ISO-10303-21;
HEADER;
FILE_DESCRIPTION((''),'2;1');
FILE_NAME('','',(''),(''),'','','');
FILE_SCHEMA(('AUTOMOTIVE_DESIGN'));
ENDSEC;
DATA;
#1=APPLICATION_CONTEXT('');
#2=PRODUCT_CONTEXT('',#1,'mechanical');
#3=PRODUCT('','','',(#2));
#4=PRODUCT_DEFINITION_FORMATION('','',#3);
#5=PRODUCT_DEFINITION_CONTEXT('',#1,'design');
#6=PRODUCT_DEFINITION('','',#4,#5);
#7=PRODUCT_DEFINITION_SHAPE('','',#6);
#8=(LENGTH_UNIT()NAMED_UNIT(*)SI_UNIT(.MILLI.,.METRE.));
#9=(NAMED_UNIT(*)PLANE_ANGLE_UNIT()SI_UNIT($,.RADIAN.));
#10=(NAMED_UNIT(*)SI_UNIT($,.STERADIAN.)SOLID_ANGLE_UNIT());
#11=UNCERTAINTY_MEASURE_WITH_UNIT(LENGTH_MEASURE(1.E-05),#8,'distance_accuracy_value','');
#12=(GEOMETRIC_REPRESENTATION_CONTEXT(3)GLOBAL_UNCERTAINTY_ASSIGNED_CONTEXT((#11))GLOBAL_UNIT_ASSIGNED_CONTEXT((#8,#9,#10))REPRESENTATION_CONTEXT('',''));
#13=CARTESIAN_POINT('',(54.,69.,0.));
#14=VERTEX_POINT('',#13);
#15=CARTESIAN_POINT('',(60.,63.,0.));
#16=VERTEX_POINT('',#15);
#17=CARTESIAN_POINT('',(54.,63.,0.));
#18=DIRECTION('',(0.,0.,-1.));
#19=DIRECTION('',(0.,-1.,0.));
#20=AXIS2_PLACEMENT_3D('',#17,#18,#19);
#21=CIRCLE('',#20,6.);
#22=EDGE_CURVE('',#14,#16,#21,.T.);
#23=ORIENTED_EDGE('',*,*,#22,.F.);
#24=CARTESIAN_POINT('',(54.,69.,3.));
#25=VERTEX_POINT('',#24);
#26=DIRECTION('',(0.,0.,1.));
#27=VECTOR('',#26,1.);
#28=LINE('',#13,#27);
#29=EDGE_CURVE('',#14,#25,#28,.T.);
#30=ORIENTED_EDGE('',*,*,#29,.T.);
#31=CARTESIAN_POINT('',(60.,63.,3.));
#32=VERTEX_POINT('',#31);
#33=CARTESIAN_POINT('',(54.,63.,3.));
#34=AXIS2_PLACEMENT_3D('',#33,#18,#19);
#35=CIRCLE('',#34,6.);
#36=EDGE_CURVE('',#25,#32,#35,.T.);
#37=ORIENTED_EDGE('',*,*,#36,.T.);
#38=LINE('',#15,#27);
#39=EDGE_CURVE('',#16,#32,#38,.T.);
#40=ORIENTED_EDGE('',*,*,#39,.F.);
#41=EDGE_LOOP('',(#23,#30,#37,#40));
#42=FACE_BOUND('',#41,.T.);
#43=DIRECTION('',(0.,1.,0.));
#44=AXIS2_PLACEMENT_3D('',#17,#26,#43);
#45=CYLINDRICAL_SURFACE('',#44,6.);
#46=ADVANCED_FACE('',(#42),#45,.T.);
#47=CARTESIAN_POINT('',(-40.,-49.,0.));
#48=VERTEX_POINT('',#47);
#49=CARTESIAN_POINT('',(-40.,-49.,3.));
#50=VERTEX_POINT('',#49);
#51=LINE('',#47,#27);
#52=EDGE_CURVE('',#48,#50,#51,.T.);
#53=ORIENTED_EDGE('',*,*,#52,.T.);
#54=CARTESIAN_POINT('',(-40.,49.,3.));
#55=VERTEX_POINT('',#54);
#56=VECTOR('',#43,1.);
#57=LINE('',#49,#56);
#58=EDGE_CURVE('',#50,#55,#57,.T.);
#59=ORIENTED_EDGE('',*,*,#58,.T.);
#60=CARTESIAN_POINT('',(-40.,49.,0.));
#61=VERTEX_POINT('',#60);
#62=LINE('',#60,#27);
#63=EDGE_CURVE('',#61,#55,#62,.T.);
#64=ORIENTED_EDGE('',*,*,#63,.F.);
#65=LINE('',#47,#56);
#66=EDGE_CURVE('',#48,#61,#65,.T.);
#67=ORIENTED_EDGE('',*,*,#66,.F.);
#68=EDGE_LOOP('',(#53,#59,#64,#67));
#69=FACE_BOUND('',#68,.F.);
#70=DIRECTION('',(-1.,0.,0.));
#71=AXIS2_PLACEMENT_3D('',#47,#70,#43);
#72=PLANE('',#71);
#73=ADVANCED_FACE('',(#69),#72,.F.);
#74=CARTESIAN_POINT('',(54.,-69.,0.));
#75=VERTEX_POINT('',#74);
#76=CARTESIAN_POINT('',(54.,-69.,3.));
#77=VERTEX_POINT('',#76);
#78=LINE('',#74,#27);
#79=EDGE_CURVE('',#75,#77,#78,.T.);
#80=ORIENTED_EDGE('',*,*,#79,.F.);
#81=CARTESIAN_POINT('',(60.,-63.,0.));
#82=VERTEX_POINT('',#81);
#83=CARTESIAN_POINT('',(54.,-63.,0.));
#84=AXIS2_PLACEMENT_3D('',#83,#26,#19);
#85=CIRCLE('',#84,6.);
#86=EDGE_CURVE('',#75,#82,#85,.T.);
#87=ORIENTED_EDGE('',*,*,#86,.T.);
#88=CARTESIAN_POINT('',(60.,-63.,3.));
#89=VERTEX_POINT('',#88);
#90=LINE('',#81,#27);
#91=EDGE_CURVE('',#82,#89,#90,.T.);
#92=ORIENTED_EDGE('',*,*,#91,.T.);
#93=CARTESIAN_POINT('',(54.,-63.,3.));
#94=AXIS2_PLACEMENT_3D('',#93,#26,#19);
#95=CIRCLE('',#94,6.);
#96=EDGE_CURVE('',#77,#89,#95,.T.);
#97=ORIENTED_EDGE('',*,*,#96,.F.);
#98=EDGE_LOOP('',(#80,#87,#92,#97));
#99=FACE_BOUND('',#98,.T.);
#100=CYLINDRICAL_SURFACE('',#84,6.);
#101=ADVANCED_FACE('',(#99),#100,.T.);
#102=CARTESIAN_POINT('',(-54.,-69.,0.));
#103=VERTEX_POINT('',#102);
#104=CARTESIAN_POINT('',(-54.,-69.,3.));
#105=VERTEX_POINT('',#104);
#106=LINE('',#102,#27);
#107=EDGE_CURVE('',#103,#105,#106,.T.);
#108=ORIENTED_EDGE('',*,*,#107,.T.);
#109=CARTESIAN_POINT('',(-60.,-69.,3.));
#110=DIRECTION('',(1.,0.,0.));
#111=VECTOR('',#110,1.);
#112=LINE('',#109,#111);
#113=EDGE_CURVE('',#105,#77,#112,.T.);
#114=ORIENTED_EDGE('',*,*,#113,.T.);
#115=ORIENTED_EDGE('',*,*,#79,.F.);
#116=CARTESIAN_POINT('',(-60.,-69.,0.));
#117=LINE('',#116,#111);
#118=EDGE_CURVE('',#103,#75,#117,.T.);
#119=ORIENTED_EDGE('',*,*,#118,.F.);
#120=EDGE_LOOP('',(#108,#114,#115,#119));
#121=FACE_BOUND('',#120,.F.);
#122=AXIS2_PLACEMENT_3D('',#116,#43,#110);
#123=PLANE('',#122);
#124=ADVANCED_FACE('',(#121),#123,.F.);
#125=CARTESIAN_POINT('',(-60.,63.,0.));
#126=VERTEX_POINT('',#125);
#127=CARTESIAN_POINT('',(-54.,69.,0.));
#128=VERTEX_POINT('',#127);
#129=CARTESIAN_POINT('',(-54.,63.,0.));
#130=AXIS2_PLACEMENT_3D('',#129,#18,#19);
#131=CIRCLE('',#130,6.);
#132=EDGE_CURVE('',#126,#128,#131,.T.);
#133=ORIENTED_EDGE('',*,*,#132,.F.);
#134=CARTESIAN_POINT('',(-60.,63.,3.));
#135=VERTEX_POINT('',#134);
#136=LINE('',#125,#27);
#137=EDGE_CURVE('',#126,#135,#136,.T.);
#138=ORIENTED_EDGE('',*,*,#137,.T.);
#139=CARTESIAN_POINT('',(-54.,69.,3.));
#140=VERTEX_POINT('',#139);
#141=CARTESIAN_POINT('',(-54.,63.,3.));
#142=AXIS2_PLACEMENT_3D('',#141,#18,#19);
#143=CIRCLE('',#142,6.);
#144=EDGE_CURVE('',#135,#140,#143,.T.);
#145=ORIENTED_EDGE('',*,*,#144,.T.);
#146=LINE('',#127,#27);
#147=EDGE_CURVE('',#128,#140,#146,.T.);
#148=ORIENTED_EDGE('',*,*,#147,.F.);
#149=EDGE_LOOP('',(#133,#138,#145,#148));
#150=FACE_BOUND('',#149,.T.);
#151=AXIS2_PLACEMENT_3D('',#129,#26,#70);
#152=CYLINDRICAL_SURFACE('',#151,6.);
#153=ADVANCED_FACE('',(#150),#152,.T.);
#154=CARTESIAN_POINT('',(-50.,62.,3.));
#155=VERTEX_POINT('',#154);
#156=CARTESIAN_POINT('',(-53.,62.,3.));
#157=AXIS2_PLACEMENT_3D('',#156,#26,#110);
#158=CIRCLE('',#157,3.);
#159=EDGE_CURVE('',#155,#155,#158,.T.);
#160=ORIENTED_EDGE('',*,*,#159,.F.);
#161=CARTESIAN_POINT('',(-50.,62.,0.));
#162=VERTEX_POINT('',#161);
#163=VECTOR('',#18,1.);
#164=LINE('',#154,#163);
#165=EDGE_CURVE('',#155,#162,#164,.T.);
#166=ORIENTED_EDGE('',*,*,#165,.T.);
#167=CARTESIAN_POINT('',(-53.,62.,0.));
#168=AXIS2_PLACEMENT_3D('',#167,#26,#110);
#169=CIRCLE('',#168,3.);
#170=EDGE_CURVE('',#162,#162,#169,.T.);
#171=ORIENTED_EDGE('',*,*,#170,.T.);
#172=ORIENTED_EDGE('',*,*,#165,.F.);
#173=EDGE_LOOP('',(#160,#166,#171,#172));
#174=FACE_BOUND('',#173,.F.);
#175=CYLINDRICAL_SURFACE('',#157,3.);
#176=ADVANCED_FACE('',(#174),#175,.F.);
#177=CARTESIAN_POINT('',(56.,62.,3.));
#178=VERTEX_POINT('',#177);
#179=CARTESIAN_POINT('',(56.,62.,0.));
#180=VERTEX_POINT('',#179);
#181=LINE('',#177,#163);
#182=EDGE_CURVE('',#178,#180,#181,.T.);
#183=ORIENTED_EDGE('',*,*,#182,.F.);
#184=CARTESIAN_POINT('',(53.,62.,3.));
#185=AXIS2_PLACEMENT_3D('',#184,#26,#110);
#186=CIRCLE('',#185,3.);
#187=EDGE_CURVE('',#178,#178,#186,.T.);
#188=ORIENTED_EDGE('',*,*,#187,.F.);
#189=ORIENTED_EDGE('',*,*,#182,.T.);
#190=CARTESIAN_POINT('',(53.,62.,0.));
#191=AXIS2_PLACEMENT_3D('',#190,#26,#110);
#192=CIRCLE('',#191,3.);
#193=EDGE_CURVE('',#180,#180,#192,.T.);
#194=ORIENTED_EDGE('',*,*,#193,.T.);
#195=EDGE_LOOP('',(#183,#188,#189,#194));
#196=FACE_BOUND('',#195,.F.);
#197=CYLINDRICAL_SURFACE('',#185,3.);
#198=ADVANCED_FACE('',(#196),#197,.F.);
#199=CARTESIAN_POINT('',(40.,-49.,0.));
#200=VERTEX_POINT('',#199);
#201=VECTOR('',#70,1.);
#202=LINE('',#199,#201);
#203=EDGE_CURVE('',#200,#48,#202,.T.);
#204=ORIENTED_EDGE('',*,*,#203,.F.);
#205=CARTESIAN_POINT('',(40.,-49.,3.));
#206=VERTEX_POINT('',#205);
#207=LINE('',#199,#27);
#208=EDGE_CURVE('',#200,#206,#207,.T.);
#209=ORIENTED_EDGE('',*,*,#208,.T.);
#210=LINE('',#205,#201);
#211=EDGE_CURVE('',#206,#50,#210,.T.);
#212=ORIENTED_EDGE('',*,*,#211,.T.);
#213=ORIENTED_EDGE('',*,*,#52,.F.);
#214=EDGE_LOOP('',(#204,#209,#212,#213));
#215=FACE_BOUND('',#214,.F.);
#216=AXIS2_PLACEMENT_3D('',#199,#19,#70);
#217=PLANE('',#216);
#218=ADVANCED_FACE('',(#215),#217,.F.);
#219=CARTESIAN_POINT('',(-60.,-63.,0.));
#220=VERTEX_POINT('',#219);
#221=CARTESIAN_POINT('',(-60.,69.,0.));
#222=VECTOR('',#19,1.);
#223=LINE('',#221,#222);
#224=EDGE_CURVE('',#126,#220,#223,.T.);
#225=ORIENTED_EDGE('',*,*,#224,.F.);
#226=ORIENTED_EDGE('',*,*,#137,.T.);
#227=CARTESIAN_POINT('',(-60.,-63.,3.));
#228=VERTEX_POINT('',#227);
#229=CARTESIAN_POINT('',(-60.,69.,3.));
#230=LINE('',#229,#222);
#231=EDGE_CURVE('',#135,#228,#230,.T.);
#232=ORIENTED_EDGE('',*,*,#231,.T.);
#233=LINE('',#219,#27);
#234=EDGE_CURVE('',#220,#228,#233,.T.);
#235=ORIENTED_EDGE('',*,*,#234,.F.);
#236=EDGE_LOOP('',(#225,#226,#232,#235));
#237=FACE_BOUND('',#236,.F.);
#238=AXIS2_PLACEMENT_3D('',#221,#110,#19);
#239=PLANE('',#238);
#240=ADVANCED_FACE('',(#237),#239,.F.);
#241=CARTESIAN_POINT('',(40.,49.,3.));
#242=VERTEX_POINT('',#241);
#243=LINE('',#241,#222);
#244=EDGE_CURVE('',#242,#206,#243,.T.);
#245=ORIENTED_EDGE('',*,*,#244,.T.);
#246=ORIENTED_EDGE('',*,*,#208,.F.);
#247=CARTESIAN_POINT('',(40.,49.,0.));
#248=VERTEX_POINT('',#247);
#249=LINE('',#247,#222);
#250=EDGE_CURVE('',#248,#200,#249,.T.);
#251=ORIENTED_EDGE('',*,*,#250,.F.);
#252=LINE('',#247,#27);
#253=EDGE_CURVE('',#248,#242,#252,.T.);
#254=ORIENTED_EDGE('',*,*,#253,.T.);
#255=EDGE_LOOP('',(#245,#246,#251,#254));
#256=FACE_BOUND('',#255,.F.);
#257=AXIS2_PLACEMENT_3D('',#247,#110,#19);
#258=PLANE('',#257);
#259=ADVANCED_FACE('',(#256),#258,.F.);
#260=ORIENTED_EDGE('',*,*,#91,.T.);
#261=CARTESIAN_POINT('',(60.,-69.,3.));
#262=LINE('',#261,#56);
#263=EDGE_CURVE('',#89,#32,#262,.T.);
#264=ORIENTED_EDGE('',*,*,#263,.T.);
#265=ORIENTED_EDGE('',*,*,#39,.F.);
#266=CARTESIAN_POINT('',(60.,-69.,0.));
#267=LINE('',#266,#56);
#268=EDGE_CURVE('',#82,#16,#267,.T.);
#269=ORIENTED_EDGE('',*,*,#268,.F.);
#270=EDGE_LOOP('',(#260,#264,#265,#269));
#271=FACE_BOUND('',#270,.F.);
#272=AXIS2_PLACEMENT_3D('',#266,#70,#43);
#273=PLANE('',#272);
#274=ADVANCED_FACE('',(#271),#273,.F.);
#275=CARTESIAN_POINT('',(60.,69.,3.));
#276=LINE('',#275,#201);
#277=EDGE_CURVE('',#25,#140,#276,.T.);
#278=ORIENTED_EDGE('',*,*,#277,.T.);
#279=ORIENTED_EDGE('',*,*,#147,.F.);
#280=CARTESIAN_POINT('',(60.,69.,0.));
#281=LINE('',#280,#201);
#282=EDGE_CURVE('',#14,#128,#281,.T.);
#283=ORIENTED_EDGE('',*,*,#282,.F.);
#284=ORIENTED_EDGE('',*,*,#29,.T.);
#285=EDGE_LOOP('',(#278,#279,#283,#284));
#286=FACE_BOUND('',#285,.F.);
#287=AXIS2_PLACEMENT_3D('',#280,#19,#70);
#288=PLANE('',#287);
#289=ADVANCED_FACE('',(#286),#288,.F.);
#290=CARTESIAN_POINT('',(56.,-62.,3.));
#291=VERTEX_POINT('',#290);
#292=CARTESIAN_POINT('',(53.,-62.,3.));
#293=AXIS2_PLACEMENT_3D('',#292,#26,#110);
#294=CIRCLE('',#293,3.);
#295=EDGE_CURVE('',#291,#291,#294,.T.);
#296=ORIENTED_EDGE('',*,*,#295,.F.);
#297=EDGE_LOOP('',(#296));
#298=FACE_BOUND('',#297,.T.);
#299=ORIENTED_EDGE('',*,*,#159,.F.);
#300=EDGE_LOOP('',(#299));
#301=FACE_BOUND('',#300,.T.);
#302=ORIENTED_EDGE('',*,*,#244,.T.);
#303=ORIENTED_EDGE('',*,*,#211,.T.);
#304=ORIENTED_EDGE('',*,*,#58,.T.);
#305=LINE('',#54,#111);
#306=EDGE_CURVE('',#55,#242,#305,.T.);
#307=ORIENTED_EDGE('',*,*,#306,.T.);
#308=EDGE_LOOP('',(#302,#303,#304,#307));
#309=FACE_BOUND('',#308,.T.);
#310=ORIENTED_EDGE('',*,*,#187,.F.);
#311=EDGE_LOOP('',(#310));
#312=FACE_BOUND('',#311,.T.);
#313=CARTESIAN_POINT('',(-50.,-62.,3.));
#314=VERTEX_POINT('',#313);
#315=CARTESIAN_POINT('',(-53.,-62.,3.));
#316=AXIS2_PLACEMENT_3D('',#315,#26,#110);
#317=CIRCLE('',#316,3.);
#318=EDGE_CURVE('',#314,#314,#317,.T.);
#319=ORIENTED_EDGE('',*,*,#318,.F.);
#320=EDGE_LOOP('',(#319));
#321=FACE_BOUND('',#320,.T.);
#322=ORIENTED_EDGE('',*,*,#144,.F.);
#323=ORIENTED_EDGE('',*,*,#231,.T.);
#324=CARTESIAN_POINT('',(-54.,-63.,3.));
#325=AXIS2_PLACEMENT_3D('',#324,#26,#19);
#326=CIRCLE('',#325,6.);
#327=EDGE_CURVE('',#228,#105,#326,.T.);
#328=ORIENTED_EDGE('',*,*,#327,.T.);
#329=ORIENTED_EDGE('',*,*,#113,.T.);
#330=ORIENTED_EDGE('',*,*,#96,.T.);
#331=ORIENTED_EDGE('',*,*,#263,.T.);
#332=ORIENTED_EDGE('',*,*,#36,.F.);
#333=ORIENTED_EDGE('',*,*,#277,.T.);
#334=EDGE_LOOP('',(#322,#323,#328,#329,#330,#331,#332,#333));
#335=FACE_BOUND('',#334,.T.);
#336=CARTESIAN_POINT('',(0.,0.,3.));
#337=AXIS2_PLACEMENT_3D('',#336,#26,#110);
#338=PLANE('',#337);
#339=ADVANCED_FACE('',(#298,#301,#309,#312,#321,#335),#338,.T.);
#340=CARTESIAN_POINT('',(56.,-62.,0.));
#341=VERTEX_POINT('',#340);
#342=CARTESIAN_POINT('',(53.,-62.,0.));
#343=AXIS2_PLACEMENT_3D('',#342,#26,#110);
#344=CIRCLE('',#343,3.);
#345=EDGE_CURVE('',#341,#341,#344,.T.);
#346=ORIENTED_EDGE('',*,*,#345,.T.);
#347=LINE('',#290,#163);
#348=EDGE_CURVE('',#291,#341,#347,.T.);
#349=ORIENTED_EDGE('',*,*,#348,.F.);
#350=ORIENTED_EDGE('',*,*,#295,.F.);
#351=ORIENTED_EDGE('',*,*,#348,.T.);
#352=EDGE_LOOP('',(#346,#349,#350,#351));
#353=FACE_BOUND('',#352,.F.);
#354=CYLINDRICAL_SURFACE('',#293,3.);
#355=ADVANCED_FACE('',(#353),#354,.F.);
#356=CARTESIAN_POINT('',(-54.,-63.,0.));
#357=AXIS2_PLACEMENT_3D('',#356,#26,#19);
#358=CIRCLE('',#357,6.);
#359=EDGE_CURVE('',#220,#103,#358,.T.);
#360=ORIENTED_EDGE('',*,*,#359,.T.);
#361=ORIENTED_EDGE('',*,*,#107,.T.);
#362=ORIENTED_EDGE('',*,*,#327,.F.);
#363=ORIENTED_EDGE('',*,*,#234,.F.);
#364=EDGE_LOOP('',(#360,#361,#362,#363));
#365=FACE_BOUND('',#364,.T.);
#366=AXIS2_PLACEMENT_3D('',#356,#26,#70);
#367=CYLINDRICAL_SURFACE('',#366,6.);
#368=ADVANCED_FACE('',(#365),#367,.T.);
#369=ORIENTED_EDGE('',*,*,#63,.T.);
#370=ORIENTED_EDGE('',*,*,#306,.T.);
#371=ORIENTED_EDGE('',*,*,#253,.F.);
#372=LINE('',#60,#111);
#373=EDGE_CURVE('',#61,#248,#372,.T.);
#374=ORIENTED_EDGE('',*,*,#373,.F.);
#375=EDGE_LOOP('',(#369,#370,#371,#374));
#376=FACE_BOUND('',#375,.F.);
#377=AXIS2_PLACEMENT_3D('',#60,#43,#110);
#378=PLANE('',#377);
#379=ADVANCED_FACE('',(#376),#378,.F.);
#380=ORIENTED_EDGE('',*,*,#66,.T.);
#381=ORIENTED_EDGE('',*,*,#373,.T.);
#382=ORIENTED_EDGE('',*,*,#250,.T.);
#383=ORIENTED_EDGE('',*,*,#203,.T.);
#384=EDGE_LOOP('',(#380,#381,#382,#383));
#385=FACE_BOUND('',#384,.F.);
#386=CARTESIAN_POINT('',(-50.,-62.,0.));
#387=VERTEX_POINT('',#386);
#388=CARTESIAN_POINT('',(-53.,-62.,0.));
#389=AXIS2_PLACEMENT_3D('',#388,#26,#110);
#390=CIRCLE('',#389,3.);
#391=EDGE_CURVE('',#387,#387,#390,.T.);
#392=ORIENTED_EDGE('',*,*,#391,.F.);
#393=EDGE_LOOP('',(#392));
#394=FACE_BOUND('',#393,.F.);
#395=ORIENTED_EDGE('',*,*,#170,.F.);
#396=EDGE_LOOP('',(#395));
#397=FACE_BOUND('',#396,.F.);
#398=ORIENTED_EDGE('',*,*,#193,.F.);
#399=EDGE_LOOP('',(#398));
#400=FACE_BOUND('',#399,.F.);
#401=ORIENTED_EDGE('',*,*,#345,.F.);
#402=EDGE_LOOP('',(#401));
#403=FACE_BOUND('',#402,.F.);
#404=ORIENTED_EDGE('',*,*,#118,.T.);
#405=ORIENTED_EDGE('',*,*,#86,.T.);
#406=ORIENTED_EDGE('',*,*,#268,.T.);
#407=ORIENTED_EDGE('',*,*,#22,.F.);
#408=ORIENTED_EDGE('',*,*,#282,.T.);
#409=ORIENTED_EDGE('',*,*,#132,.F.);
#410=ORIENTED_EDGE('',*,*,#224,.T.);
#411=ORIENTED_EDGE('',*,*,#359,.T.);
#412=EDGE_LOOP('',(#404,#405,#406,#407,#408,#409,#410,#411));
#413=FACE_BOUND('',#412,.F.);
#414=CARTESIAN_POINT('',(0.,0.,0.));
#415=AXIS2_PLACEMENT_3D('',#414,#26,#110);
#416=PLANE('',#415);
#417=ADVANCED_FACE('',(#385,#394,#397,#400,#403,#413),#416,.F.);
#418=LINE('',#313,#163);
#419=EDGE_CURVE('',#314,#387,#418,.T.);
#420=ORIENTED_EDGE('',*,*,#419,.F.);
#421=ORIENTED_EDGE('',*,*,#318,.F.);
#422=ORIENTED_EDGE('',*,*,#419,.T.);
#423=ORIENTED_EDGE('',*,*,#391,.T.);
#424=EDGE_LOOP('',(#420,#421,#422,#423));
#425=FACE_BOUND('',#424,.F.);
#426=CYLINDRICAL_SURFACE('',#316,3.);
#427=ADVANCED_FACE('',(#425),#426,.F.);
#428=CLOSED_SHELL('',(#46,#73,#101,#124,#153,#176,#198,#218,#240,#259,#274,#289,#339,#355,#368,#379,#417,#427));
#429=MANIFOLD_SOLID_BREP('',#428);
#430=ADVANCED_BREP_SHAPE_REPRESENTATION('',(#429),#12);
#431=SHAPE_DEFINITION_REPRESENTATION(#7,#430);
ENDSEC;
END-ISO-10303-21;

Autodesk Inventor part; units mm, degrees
ref_plane "YZ Plane" through (0, 0, 0) normal (1, 0, 0) x (0, 1, 0)
ref_plane "XZ Plane" through (0, 0, 0) normal (0, 1, 0) x (-1, 0, 0)
ref_plane "XY Plane" through (0, 0, 0) normal (0, 0, 1) x (1, 0, 0)
sketch "Sketch1" plane through (0, 0, 0) normal (0, 0, 1) x (1, 0, 0)
  line L0 (-60, -69) -> (60, -69)
  line L1 (60, -69) -> (60, 69)
  line L2 (60, 69) -> (-60, 69)
  line L3 (-60, 69) -> (-60, -69)
  line L4 (-60, -69) -> (60, 69) construction
  line L5 (60, -69) -> (-60, 69) construction
  line L6 (40, -49) -> (-40, -49)
  line L7 (-40, -49) -> (-40, 49)
  line L8 (-40, 49) -> (40, 49)
  line L9 (40, 49) -> (40, -49)
  line L10 (40, -49) -> (-40, 49) construction
  line L11 (-40, -49) -> (40, 49) construction
  point P0 (0, 0)
  dimension "d172" = 80
  dimension "d180" = 20
  dimension "d181" = 20
  dimension "d182" = 98
extrude "Plate5" add sketch "Sketch1" along normal blind 3
sketch "Sketch9" plane through (0, 0, 3) normal (0, 0, 1) x (1, 0, 0)
  circle A0 centre (53, -62) radius 3
  line L0 (53, 62) -> (-53, 62) construction
  line L1 (-53, 62) -> (-53, -62) construction
  line L2 (-53, -62) -> (53, -62) construction
  line L3 (53, -62) -> (53, 62) construction
  line L4 (53, 62) -> (-53, -62) construction
  line L5 (-53, 62) -> (53, -62) construction
  circle A1 centre (-53, -62) radius 3
  circle A2 centre (53, 62) radius 3
  circle A3 centre (-53, 62) radius 3
  line L6 (-40, -49) -> (-40, 49) projected
  line L7 (-40, 49) -> (40, 49) projected
  line L8 (40, 49) -> (40, -49) projected
  line L9 (40, -49) -> (-40, -49) projected
  line L10 (60, -69) -> (-60, -69) projected
  line L11 (60, 69) -> (60, -69) projected
  line L12 (-60, 69) -> (60, 69) projected
  line L13 (-60, -69) -> (-60, 69) projected
  circle A4 centre (-53, 0) radius 3 construction
  circle A5 centre (53, 0) radius 3 construction
  point P0 (0, 0)
  dimension "d174" = 6
  dimension "d183" = 7
  dimension "d184" = 7
extrude "Cut2" cut sketch "Sketch9" against normal blind 3 contours A0 | A1 | A2 | A3
fillet "Corner Round1" radius 6 4 edges at (60, 69, 1.5) (-60, 69, 1.5) (-60, -69, 1.5) (60, -69, 1.5)
properties part number "ANP 1421 FDS Diam way flange 1" material "Stainless Steel"
